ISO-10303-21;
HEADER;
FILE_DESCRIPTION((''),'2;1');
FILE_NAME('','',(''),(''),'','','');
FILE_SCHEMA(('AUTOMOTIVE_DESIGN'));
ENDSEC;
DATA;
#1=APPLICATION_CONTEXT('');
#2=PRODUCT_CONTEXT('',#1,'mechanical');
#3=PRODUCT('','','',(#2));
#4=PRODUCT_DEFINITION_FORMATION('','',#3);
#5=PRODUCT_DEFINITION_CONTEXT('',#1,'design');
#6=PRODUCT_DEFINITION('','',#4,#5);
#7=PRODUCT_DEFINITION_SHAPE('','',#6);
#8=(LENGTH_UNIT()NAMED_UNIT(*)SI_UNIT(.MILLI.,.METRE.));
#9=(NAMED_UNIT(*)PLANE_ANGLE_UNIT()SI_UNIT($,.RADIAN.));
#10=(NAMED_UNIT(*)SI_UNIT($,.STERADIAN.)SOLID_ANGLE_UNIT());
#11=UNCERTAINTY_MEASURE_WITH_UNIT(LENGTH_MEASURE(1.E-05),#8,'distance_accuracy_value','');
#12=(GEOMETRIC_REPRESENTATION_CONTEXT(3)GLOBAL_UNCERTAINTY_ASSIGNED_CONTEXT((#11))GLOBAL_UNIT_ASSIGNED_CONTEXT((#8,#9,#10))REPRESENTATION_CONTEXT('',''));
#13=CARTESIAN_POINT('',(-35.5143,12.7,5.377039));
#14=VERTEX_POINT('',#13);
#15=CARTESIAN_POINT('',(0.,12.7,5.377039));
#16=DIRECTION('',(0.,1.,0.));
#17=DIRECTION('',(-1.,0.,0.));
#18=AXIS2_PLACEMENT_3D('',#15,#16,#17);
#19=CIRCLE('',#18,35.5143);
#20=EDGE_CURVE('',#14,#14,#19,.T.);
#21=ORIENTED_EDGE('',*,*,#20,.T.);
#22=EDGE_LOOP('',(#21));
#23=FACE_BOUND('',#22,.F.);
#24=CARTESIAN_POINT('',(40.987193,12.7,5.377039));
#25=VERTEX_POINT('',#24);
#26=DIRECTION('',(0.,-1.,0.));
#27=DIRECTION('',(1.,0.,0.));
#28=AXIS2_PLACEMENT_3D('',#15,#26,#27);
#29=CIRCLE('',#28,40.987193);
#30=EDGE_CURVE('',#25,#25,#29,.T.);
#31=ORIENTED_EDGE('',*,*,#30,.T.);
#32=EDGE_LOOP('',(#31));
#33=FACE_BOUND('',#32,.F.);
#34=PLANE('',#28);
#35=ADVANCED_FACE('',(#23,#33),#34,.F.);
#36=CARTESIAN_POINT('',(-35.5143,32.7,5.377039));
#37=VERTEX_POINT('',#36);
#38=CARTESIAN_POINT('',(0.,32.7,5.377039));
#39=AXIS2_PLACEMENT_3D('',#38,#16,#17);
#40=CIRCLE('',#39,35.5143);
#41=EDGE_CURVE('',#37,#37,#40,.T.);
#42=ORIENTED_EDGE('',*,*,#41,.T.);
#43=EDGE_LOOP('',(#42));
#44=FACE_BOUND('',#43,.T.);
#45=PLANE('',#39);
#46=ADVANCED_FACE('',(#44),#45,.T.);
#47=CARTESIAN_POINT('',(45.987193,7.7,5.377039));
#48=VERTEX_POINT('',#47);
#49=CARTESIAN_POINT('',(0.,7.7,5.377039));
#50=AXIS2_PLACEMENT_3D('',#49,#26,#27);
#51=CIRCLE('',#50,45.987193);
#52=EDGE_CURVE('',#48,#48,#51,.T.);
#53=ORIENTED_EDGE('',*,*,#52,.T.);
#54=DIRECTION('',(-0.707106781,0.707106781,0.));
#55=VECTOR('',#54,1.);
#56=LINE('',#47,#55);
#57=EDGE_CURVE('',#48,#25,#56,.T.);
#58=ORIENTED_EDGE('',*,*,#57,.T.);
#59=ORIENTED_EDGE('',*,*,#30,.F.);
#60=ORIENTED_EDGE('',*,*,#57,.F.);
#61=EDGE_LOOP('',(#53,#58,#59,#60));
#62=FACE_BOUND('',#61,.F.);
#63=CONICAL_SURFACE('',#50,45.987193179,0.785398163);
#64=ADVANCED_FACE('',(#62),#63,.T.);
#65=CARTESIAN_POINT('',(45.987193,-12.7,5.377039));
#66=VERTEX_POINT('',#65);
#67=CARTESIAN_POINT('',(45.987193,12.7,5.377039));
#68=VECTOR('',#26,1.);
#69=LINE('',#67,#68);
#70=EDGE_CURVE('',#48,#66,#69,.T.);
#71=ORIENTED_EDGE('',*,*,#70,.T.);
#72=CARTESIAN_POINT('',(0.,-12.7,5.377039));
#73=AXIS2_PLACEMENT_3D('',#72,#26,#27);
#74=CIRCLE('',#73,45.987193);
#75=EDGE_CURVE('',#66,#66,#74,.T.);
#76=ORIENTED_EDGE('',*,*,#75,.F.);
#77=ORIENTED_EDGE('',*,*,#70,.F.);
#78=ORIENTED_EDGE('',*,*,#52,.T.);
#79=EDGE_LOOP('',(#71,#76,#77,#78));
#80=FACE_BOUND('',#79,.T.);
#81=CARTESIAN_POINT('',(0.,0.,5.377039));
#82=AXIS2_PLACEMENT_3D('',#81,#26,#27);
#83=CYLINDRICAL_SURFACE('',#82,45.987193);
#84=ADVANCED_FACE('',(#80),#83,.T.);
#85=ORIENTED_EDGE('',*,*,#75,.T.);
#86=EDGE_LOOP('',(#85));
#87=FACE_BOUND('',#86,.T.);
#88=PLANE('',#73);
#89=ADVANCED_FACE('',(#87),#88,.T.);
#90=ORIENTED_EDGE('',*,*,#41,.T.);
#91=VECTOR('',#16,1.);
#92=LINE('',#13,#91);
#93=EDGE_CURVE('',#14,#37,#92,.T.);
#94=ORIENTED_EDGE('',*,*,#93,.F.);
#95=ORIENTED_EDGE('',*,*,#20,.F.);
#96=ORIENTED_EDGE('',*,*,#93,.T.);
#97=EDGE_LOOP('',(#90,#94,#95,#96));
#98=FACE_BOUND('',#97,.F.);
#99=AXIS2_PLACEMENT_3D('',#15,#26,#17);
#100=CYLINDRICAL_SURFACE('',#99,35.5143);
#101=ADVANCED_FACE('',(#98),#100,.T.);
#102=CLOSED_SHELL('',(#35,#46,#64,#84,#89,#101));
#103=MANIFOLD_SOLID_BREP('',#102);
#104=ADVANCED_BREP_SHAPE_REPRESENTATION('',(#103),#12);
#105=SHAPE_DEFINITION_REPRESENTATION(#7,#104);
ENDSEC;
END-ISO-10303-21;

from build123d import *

# Parameters (mm, degrees)
F0_R     = 45.9871931788
F1_DEPTH = 12.7
F4_R     = 35.5142998493
F5_DEPTH = 20
F6_SIZE  = 5


# Not quite as in the source:
# - the program builds the solid bodies; features that only make, move or delete a surface that nothing else refers to are left out


with BuildPart() as f1:
    # F0 (on Front) → F1 (new body, symmetric)
    with BuildSketch(Plane.XZ):
        with Locations((0, 5.3770393133)):
            Circle(F0_R)
    extrude(amount=F1_DEPTH, both=True)

    # F4 (on face) → F5 (join)
    with BuildSketch(Plane(origin=(0, 12.7, 0), x_dir=(-1, 0, 0), z_dir=(0, 1, 0))):
        with Locations((0, 5.3770393133)):
            Circle(F4_R)
    extrude(amount=F5_DEPTH)

    # F6
    f6_edges = [f1.edges().sort_by_distance(p)[0] for p in [
        (-45.987193, 12.7, 5.377039),
    ]]
    chamfer(f6_edges, length=F6_SIZE)


solid = f1.part
